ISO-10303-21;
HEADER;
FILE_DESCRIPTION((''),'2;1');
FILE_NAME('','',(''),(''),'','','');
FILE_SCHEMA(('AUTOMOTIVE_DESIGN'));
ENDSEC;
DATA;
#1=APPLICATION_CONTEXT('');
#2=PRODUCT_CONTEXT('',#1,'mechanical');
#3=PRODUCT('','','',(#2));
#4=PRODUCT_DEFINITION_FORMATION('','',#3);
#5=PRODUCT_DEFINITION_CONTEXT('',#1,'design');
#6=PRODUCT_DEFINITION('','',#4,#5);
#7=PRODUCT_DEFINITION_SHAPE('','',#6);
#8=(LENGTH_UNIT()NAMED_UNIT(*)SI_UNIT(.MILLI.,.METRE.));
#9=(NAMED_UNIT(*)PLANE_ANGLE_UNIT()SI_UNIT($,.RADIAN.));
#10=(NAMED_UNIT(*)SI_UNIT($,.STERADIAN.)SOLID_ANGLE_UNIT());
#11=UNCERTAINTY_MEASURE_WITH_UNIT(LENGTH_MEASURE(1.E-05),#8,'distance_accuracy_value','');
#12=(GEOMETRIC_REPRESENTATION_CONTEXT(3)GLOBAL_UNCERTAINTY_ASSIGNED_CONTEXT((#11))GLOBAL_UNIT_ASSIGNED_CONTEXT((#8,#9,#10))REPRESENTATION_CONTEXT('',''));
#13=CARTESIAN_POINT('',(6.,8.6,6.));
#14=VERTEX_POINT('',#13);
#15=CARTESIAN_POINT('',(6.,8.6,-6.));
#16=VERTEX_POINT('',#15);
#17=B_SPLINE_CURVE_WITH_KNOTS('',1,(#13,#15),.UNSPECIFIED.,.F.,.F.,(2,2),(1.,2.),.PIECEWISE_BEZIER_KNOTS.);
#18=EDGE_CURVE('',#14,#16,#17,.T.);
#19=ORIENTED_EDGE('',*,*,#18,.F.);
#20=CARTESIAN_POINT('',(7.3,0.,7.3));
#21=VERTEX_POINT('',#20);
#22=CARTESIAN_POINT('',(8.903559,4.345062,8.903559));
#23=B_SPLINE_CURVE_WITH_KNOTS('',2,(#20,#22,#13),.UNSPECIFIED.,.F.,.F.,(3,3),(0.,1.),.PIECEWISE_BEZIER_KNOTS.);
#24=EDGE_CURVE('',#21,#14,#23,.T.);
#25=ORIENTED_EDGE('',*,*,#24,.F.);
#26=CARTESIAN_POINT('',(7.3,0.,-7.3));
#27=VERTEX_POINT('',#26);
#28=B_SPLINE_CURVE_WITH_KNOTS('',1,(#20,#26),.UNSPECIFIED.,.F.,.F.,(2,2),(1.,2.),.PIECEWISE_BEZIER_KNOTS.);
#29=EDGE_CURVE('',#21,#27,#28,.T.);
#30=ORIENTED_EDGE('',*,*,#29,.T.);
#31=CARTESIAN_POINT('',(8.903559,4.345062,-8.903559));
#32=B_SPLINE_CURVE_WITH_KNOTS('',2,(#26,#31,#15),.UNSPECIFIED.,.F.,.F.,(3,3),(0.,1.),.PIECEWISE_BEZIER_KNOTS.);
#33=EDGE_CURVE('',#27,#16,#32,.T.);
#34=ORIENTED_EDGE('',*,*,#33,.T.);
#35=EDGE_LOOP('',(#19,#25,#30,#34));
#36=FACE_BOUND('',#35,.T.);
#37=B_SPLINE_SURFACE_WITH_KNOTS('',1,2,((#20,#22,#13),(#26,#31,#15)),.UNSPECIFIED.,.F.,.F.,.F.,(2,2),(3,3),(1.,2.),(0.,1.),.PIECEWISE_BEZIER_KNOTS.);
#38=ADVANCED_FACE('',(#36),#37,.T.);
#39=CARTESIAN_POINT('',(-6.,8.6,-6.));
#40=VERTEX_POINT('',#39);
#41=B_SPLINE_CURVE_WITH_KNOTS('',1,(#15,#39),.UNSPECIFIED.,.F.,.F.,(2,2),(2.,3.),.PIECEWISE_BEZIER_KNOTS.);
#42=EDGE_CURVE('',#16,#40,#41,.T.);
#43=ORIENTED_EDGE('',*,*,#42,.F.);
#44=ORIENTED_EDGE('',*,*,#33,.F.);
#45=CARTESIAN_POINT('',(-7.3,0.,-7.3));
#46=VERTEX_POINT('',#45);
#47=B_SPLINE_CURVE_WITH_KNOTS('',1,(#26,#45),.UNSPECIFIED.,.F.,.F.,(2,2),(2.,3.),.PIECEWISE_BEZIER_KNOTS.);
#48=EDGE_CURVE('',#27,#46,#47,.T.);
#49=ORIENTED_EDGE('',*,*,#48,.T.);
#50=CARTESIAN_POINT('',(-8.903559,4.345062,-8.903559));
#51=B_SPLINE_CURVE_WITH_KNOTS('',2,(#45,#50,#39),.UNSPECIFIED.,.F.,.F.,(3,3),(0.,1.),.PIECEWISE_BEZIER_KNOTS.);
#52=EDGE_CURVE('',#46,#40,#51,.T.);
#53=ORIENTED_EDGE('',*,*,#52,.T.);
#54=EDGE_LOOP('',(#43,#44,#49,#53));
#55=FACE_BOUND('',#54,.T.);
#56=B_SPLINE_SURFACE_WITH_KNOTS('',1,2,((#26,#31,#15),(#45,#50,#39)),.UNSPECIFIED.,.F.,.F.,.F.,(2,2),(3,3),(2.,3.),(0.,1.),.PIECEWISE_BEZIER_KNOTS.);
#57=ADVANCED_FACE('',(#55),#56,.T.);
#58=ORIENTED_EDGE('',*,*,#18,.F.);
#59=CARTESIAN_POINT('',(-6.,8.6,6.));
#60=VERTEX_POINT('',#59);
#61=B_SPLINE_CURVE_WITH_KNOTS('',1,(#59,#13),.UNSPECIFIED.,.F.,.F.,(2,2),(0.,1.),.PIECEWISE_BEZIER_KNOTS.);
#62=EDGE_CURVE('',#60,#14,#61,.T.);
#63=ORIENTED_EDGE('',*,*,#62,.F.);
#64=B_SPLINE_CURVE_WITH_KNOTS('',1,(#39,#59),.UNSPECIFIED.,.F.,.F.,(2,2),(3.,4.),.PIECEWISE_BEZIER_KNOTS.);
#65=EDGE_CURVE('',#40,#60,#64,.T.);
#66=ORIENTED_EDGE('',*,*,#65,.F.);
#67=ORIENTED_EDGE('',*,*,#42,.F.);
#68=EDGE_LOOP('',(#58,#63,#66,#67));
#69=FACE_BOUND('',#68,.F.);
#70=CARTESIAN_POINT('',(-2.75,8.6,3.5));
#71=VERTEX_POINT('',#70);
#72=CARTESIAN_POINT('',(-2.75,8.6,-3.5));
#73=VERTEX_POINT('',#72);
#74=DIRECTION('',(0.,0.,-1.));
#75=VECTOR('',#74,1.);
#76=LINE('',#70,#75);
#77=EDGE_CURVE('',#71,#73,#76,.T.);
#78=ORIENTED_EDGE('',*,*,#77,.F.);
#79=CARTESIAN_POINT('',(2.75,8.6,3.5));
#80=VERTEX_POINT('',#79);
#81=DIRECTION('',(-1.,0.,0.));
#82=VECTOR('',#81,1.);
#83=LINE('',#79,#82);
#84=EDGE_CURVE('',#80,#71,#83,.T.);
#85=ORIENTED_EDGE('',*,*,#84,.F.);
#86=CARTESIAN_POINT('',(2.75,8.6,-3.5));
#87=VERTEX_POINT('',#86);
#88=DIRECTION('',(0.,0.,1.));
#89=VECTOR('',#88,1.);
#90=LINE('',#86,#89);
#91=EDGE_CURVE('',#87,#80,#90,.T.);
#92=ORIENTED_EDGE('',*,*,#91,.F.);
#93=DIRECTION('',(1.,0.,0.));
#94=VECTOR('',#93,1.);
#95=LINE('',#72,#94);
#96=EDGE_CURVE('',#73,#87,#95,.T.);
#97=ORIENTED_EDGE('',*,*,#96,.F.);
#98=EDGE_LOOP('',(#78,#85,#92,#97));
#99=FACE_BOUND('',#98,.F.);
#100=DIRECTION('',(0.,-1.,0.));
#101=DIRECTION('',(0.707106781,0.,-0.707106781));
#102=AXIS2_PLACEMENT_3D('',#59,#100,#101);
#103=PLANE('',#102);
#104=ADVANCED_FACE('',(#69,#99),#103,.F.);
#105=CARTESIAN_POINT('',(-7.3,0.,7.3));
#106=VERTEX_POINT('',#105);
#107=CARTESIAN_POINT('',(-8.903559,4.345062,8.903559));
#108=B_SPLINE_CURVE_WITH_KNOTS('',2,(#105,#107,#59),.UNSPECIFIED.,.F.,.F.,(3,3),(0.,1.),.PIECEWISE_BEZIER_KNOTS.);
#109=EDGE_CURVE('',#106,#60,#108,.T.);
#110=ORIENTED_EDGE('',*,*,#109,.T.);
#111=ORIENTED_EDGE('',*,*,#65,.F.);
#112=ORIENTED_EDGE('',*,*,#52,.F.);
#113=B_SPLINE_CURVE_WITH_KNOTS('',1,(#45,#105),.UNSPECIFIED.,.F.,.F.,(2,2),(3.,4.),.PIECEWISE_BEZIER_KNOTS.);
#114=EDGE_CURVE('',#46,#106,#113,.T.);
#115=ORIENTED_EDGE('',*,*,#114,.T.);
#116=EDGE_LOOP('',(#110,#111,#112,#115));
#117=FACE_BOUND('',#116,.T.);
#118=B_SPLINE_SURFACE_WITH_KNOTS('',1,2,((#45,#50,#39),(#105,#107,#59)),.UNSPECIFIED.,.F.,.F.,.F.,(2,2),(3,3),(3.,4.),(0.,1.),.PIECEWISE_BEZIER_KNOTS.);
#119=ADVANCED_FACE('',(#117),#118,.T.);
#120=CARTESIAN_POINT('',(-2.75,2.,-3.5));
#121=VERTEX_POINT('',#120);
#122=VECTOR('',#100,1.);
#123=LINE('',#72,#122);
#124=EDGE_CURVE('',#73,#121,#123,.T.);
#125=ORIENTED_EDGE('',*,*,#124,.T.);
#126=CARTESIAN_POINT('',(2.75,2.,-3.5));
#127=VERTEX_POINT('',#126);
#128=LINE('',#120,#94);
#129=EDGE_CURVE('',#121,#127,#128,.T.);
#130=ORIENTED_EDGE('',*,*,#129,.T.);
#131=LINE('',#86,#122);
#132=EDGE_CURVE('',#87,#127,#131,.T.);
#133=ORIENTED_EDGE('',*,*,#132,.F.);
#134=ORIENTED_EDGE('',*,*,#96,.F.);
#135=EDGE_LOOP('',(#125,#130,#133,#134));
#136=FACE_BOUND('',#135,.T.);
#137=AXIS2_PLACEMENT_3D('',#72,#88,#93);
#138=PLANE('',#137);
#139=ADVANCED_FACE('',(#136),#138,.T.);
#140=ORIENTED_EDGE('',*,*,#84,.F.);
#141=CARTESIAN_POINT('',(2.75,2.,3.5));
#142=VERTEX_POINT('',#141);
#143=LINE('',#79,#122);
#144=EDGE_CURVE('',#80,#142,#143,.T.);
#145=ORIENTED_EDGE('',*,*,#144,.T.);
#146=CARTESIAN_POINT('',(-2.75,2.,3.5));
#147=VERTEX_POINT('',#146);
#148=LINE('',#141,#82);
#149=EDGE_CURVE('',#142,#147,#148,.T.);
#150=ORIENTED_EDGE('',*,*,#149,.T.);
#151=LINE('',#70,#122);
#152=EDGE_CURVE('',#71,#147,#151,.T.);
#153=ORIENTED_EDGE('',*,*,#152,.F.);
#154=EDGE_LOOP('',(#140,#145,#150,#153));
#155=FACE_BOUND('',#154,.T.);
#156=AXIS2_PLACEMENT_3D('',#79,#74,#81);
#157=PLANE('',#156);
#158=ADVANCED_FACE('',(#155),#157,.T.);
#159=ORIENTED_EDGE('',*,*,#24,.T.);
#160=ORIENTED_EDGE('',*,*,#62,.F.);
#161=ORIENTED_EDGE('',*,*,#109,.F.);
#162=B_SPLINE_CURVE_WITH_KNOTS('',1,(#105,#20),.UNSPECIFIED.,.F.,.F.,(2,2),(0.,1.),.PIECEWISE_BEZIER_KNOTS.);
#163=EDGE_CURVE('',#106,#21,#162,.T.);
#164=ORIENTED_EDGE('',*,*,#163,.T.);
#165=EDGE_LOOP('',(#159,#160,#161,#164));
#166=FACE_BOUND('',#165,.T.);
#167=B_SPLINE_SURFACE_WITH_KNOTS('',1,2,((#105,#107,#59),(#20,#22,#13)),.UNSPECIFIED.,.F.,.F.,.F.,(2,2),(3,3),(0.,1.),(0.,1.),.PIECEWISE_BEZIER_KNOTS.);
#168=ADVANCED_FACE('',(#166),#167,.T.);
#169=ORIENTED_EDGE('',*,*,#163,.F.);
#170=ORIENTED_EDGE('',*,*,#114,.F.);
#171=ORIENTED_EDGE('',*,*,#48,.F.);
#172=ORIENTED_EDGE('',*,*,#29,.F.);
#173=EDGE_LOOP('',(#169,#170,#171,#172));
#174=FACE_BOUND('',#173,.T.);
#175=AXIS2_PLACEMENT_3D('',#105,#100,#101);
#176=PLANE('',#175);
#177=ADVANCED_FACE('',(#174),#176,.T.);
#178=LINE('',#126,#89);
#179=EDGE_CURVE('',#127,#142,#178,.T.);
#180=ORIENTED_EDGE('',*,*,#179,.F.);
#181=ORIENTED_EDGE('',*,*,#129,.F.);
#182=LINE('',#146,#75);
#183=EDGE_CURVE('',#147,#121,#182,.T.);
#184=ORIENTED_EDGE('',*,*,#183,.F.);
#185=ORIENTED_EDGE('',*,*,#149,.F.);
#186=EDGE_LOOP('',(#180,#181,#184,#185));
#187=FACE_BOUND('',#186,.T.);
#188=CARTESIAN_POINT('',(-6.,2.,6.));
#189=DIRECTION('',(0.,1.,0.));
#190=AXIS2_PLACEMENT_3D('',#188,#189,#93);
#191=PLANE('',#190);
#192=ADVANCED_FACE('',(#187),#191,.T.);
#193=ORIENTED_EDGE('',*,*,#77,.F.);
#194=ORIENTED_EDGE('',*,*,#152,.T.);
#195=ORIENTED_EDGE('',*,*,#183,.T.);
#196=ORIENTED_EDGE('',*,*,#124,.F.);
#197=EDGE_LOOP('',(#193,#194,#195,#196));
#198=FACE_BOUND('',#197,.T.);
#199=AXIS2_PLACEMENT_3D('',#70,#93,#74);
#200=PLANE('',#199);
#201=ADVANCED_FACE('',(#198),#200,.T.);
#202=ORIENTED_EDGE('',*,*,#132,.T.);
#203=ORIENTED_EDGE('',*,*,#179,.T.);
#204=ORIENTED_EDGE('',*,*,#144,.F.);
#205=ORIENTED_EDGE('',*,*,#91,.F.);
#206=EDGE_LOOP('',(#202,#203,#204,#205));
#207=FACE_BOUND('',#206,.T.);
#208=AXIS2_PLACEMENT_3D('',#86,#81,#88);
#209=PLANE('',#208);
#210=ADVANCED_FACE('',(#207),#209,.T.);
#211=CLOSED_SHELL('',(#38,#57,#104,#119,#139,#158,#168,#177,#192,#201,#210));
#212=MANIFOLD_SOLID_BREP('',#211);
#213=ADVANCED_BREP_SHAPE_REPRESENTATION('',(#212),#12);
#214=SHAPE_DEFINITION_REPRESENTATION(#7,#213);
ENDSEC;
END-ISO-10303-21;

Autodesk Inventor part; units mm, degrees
ref_plane "YZ Plane" through (0, 0, 0) normal (1, 0, 0) x (0, 1, 0)
ref_plane "XZ Plane" through (0, 0, 0) normal (0, 1, 0) x (-1, 0, 0)
sketch "Base Loop" plane through (0, 0, 0) normal (0, 1, 0) x (-1, 0, 0)
  line L0 (-7.3, 7.3) -> (7.3, 7.3)
  line L1 (7.3, 7.3) -> (7.3, -7.3)
  line L2 (7.3, -7.3) -> (-7.3, -7.3)
  line L3 (-7.3, -7.3) -> (-7.3, 7.3)
  line L4 (-7.3, 7.3) -> (7.3, -7.3) construction
  line L5 (7.3, 7.3) -> (-7.3, -7.3) construction
  point P0 (0, 0)
  point P1 (0, 0)
  point P2 (0, 0)
  dimension "d0" = 14.6
  dimension "d1" = 14.6
ref_plane "Mid Plane" through (-7.3, 2, -7.3) normal (0, 1, 0) x (1, 0, 0)
ref_plane "Base Plane" through (-7.3, 0, -7.3) normal (0, 1, 0) x (1, 0, 0)
sketch "Mid Loop" plane through (-7.3, 2, -7.3) normal (0, 1, 0) x (1, 0, 0)
  line L0 (15.1, -15.1) -> (-0.5, -15.1)
  line L1 (-0.5, -15.1) -> (-0.5, 0.5)
  line L2 (-0.5, 0.5) -> (15.1, 0.5)
  line L3 (15.1, 0.5) -> (15.1, -15.1)
  line L4 (15.1, -15.1) -> (-0.5, 0.5) construction
  line L5 (-0.5, -15.1) -> (15.1, 0.5) construction
  point P0 (7.3, -7.3)
  dimension "d3" = 15.6
  dimension "d4" = 15.6
ref_plane "Top Plane" through (-7.3, 8.6, -7.3) normal (0, 1, 0) x (1, 0, 0)
sketch "Top Loop" plane through (-7.3, 8.6, -7.3) normal (0, 1, 0) x (1, 0, 0)
  line L0 (13.3, -13.3) -> (1.3, -13.3)
  line L1 (1.3, -13.3) -> (1.3, -1.3)
  line L2 (1.3, -1.3) -> (13.3, -1.3)
  line L3 (13.3, -1.3) -> (13.3, -13.3)
  line L4 (13.3, -13.3) -> (1.3, -1.3) construction
  line L5 (1.3, -13.3) -> (13.3, -1.3) construction
  point P0 (7.3, -7.3)
  dimension "d6" = 12
  dimension "d7" = 12
loft "Keyswitch Body" add profiles "Base Loop", "Mid Loop", "Top Loop"
sketch "Cut in profile" plane through (-6, 8.6, 6) normal (0, 1, 0) x (1, 0, 0)
  line L0 (8.75, 2.5) -> (3.25, 2.5)
  line L1 (3.25, 2.5) -> (3.25, 9.5)
  line L2 (3.25, 9.5) -> (8.75, 9.5)
  line L3 (8.75, 9.5) -> (8.75, 2.5)
  line L4 (8.75, 2.5) -> (3.25, 9.5) construction
  line L5 (3.25, 2.5) -> (8.75, 9.5) construction
  point P0 (6, 6)
  dimension "d17" = 7
  dimension "d18" = 5.5
extrude "Pole Cut in" cut sketch "Cut in profile" against normal blind 6.6
equation "\"d1\" = d0"
equation "\"d3\" = s_bwidth"
equation "\"d4\" = d3"
equation "\"d17\" = s_polebl"
equation "\"d18\" = s_polebw"
equation "\"k_width\" = 18.1"
equation "\"k_height\" = 18"
equation "\"k_taper1\" = 1.5"
equation "\"k_taper2\" = 0.5"
equation "\"k_radius\" = 6"
equation "\"k_wthick\" = 1.5"
equation "\"k_ribthick\" = 1.5"
equation "\"k_ribheight\" = 5"
equation "\"k_poleoff\" = 2.2625"
equation "\"k_poledia\" = 5.54"
equation "\"k_cmxw\" = 1.35"
equation "\"k_cmxl\" = 4.4"
equation "\"s_bwidth\" = 15.6"
equation "\"s_poleh\" = 3.6"
equation "\"s_polebw\" = 5.5"
equation "\"s_polebl\" = 7"
equation "\"b_rshift\" = 49.775"
equation "\"b_ctrl\" = 22.625"
equation "\"b_space\" = 117.65"
equation "\"b_height\" = 77.4"
equation "\"b_width\" = 286.5"
equation "\"b_lshift\" = 40.725"
equation "\"b_tab\" = 27.15"
equation "\"b_pad\" = 1"
equation "\"b_caps\" = 31.675"
equation "\"k_staper\" = 1"
equation "\"k_ltaper\" = 1.5"
equation "\"k_lradius\" = 6"
equation "\"k_sradius\" = 4"
equation "\"k_height_t\" = 16"
properties part number "keyswitch-base_cherrymx"
